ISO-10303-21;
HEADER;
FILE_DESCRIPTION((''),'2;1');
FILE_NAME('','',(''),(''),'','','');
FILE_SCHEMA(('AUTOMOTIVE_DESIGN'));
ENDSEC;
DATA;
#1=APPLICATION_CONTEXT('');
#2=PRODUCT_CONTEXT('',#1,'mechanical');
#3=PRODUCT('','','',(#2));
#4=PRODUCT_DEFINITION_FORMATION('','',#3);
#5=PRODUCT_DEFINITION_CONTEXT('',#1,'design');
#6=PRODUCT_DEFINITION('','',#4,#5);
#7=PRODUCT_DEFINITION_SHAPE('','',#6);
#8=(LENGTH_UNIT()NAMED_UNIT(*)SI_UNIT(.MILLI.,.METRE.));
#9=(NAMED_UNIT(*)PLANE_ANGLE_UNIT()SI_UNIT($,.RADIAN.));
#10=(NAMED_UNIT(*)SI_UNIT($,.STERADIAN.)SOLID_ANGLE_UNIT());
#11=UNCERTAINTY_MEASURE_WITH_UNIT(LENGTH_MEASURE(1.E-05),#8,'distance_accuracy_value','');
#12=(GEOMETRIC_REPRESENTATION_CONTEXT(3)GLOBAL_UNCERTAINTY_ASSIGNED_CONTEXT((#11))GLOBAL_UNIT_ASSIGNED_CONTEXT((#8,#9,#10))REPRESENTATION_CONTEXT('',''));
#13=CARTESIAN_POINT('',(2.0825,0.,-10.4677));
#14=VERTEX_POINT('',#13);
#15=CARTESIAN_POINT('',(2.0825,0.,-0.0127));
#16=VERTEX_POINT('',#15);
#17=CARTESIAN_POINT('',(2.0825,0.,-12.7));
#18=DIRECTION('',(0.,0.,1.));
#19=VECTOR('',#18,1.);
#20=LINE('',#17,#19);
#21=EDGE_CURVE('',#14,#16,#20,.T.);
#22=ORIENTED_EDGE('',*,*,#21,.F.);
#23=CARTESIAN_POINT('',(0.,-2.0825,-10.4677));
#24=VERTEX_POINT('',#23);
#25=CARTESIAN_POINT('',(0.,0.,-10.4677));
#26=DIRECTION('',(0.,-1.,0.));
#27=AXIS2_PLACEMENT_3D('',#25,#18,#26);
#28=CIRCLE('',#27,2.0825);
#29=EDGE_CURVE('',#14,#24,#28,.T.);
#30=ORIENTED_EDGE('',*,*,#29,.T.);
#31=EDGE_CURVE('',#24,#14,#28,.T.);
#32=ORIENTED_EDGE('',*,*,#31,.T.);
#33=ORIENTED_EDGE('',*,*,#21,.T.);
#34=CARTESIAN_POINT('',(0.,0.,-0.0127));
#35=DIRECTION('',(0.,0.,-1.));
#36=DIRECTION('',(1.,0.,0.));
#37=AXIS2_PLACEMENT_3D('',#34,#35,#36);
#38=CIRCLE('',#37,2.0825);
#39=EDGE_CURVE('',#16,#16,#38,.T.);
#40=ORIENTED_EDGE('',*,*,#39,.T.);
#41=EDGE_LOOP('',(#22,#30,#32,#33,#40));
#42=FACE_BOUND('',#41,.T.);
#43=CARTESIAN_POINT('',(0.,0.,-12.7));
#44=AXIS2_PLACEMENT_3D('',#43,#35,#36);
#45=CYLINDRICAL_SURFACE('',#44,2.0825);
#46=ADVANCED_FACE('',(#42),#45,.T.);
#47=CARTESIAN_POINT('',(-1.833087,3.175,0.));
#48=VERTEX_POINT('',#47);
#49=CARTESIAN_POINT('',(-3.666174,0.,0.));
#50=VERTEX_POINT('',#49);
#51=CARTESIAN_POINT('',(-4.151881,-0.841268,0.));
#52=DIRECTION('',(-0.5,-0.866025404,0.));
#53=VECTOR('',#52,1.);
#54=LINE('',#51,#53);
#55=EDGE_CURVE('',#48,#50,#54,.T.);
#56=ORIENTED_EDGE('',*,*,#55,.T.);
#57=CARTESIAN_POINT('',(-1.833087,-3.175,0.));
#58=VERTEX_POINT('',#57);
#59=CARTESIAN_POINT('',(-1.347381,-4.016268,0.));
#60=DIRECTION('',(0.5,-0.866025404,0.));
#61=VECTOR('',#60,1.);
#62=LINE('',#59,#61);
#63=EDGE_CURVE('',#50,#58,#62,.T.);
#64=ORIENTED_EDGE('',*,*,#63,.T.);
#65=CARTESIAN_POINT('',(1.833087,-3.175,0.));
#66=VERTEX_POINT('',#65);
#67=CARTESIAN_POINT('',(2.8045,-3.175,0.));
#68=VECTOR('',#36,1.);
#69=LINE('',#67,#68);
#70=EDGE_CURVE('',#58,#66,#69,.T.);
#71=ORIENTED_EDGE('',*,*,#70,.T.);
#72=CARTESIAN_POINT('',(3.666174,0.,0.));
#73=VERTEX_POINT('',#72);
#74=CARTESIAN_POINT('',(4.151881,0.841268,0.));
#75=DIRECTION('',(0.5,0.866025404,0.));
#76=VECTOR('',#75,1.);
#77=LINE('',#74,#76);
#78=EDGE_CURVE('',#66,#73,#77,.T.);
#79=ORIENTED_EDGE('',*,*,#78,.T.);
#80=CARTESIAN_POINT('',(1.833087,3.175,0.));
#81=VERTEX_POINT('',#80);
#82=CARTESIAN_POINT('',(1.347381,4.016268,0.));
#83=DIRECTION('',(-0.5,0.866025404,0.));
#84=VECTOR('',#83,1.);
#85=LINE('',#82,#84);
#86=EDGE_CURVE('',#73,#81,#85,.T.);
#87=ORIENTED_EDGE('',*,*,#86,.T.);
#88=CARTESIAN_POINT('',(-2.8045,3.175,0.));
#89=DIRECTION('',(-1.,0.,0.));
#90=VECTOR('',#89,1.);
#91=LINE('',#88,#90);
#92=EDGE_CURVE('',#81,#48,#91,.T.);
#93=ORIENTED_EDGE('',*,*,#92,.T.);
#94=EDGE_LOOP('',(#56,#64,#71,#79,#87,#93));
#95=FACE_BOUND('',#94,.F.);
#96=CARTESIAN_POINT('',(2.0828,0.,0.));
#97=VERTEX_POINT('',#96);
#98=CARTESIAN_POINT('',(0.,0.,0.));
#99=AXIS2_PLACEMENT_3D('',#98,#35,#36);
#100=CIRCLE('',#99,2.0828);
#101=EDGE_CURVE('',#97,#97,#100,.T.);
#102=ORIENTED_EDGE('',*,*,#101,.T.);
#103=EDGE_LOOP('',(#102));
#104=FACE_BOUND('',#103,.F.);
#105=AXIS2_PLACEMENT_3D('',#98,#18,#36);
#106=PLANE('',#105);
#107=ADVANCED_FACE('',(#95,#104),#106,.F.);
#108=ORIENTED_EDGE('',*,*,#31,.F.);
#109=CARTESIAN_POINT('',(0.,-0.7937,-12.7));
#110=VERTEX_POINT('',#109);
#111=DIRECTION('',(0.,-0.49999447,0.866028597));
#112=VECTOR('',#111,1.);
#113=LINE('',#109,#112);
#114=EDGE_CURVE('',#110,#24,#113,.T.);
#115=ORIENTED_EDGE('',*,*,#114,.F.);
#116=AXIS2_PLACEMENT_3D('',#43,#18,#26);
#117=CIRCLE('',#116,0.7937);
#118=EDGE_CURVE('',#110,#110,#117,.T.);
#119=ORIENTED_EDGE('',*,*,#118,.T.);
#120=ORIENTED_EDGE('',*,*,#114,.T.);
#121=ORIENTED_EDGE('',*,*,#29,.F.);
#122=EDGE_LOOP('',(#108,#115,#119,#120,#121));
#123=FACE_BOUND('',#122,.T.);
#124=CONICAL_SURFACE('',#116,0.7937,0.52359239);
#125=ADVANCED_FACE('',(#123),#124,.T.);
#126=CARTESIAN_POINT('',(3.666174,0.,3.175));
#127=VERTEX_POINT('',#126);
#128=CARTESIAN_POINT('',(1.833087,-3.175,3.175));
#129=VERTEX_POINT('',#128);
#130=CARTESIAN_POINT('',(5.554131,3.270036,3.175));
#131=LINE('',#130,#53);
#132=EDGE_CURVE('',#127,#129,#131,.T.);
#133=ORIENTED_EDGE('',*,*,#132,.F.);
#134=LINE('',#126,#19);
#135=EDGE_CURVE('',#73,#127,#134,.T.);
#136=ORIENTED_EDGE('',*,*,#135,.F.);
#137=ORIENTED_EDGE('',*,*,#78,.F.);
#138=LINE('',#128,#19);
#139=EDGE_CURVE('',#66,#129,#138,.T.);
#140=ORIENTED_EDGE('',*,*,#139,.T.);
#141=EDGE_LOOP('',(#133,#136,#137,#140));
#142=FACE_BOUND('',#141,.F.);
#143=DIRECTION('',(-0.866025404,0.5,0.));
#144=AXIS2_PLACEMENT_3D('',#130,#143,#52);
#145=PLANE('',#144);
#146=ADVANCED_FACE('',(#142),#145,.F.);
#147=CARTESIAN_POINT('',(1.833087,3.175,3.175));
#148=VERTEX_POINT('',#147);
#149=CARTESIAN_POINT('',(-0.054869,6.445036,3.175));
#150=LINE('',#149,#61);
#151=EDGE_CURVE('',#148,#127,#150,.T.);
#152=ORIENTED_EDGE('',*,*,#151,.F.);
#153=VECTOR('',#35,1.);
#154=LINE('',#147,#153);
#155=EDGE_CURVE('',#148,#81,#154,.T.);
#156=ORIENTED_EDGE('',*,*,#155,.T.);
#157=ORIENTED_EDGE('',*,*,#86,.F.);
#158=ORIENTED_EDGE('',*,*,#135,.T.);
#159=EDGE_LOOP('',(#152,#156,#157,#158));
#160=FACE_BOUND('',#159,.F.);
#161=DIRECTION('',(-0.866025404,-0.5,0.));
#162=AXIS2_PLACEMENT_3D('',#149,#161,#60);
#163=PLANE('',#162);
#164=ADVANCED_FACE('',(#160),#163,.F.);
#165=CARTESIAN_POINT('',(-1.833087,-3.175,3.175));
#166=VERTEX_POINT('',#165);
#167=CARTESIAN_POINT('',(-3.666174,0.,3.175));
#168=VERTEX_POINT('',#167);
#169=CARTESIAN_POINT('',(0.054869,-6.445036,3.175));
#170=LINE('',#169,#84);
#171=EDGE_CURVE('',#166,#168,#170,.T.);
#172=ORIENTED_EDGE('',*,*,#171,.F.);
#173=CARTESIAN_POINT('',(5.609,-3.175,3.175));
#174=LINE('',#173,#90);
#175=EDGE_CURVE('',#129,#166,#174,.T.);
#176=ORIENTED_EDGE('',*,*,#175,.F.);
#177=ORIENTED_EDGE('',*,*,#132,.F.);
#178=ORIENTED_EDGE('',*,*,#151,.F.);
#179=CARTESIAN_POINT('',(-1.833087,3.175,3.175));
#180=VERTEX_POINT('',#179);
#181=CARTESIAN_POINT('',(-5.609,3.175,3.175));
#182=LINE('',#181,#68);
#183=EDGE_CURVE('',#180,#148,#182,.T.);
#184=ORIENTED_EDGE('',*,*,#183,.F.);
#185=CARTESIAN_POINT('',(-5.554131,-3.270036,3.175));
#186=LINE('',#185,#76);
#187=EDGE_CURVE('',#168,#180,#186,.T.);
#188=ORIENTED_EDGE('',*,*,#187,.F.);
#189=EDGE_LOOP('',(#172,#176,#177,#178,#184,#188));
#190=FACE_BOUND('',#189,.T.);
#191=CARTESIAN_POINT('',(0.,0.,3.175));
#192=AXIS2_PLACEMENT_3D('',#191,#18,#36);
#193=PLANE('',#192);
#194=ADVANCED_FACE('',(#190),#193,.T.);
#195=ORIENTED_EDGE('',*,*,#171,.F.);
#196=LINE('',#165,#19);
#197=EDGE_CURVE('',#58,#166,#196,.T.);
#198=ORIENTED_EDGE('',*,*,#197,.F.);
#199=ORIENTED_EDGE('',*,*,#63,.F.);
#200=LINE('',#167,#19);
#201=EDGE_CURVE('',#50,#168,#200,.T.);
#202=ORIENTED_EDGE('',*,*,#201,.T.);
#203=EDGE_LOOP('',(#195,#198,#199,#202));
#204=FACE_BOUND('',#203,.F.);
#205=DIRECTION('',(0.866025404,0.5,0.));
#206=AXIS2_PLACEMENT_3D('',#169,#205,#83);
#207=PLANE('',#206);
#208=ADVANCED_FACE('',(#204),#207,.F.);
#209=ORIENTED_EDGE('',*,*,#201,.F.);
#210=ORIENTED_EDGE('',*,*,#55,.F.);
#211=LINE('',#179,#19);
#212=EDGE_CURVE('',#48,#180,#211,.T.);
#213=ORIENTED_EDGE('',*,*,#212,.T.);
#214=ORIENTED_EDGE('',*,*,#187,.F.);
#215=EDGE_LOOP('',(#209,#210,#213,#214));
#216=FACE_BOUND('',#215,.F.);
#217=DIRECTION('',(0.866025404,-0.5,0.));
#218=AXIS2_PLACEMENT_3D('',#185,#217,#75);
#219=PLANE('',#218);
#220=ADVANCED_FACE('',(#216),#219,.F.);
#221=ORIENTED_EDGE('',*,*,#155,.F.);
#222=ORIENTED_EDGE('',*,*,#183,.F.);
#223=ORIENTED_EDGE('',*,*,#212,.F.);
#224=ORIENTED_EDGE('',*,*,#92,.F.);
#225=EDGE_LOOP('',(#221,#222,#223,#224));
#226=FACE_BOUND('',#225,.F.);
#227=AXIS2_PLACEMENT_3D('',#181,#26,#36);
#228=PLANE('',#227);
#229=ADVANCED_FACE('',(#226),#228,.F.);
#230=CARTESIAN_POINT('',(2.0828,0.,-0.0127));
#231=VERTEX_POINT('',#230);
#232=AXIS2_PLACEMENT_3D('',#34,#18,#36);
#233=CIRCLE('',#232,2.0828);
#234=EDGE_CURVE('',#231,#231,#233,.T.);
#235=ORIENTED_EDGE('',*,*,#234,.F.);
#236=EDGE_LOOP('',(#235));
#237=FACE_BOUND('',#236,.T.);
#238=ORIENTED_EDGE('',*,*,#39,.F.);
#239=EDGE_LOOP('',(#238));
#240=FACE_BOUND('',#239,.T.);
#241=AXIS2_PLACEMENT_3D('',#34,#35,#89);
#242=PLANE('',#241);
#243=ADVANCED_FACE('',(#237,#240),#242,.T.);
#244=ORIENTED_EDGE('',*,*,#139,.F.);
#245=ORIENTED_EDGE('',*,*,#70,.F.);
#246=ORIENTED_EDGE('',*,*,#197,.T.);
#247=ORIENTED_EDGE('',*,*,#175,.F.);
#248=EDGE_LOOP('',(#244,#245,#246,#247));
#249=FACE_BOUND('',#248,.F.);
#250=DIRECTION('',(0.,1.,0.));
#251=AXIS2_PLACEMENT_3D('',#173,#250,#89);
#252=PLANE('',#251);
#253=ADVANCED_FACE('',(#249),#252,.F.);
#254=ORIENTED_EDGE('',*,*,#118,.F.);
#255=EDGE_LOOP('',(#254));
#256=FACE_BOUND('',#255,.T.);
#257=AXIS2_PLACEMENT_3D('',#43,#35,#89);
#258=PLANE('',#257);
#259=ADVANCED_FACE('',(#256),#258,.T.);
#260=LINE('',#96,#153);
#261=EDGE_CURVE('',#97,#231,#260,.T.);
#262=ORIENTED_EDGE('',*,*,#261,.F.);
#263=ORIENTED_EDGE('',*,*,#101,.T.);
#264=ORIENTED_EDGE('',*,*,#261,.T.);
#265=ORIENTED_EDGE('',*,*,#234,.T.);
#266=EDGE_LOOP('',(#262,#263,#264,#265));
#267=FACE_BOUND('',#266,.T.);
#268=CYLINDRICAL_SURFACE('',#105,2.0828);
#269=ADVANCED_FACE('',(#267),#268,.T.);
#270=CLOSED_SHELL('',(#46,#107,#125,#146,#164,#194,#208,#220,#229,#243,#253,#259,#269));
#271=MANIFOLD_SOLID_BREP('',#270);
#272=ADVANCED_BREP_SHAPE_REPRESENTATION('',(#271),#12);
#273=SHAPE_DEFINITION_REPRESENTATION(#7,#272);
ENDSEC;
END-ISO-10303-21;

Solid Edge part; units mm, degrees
sketch "Sketch1" plane through (0, 0, 0) normal (0, 0, 1) x (1, 0, 0)
  circle A0 centre (0, 0) radius 6.4452
  dimension "D1" = 12.8905
extrude "Protrusion1" add sketch "Sketch1" along normal blind 3.175
sketch "Sketch2" plane through (0, 0, 0) normal (0, 0, -1) x (1, 0, 0)
  circle A0 centre (0, 0) radius 2.0828
extrude "Protrusion2" add sketch "Sketch2" along normal blind 12.7
sketch "Sketch3" plane through (0, 0, -12.7) normal (0, 0, -1) x (1, 0, 0)
  circle A0 centre (0, 0) radius 2.0825
extrude "Cutout1" cut sketch "Sketch3" against normal blind 12.6873 flip side to cut
sketch "Sketch4" plane through (0, 0, 3.175) normal (0, 0, 1) x (1, 0, 0)
  line L0 (-5.609, 3.175) -> (5.609, 3.175)
  dimension "D1" = 6.35
extrude "Cutout2" cut sketch "Sketch4" against normal up to next material side at (0, 3.225, 3.175)
sketch "Sketch5" plane through (0, 0, 0) normal (1, 0, 0) x (0, 1, 0)
  line L0 (-0.7937, -12.7) -> (-2.0825, -10.4677)
  dimension "D1" = 0.7937
revolve "RevolvedCutout1" cut sketch "Sketch5" angle 360 about axis through (0, 0, -14.7796) along (0, 0, 1) material side at (0, -1.4814, -11.6088)
pattern_circular "Pattern1" count 6 over 360 about axis through (0, 0, 3.175) along (0, 0, 1) of "Cutout2"
properties part number "24102273"
